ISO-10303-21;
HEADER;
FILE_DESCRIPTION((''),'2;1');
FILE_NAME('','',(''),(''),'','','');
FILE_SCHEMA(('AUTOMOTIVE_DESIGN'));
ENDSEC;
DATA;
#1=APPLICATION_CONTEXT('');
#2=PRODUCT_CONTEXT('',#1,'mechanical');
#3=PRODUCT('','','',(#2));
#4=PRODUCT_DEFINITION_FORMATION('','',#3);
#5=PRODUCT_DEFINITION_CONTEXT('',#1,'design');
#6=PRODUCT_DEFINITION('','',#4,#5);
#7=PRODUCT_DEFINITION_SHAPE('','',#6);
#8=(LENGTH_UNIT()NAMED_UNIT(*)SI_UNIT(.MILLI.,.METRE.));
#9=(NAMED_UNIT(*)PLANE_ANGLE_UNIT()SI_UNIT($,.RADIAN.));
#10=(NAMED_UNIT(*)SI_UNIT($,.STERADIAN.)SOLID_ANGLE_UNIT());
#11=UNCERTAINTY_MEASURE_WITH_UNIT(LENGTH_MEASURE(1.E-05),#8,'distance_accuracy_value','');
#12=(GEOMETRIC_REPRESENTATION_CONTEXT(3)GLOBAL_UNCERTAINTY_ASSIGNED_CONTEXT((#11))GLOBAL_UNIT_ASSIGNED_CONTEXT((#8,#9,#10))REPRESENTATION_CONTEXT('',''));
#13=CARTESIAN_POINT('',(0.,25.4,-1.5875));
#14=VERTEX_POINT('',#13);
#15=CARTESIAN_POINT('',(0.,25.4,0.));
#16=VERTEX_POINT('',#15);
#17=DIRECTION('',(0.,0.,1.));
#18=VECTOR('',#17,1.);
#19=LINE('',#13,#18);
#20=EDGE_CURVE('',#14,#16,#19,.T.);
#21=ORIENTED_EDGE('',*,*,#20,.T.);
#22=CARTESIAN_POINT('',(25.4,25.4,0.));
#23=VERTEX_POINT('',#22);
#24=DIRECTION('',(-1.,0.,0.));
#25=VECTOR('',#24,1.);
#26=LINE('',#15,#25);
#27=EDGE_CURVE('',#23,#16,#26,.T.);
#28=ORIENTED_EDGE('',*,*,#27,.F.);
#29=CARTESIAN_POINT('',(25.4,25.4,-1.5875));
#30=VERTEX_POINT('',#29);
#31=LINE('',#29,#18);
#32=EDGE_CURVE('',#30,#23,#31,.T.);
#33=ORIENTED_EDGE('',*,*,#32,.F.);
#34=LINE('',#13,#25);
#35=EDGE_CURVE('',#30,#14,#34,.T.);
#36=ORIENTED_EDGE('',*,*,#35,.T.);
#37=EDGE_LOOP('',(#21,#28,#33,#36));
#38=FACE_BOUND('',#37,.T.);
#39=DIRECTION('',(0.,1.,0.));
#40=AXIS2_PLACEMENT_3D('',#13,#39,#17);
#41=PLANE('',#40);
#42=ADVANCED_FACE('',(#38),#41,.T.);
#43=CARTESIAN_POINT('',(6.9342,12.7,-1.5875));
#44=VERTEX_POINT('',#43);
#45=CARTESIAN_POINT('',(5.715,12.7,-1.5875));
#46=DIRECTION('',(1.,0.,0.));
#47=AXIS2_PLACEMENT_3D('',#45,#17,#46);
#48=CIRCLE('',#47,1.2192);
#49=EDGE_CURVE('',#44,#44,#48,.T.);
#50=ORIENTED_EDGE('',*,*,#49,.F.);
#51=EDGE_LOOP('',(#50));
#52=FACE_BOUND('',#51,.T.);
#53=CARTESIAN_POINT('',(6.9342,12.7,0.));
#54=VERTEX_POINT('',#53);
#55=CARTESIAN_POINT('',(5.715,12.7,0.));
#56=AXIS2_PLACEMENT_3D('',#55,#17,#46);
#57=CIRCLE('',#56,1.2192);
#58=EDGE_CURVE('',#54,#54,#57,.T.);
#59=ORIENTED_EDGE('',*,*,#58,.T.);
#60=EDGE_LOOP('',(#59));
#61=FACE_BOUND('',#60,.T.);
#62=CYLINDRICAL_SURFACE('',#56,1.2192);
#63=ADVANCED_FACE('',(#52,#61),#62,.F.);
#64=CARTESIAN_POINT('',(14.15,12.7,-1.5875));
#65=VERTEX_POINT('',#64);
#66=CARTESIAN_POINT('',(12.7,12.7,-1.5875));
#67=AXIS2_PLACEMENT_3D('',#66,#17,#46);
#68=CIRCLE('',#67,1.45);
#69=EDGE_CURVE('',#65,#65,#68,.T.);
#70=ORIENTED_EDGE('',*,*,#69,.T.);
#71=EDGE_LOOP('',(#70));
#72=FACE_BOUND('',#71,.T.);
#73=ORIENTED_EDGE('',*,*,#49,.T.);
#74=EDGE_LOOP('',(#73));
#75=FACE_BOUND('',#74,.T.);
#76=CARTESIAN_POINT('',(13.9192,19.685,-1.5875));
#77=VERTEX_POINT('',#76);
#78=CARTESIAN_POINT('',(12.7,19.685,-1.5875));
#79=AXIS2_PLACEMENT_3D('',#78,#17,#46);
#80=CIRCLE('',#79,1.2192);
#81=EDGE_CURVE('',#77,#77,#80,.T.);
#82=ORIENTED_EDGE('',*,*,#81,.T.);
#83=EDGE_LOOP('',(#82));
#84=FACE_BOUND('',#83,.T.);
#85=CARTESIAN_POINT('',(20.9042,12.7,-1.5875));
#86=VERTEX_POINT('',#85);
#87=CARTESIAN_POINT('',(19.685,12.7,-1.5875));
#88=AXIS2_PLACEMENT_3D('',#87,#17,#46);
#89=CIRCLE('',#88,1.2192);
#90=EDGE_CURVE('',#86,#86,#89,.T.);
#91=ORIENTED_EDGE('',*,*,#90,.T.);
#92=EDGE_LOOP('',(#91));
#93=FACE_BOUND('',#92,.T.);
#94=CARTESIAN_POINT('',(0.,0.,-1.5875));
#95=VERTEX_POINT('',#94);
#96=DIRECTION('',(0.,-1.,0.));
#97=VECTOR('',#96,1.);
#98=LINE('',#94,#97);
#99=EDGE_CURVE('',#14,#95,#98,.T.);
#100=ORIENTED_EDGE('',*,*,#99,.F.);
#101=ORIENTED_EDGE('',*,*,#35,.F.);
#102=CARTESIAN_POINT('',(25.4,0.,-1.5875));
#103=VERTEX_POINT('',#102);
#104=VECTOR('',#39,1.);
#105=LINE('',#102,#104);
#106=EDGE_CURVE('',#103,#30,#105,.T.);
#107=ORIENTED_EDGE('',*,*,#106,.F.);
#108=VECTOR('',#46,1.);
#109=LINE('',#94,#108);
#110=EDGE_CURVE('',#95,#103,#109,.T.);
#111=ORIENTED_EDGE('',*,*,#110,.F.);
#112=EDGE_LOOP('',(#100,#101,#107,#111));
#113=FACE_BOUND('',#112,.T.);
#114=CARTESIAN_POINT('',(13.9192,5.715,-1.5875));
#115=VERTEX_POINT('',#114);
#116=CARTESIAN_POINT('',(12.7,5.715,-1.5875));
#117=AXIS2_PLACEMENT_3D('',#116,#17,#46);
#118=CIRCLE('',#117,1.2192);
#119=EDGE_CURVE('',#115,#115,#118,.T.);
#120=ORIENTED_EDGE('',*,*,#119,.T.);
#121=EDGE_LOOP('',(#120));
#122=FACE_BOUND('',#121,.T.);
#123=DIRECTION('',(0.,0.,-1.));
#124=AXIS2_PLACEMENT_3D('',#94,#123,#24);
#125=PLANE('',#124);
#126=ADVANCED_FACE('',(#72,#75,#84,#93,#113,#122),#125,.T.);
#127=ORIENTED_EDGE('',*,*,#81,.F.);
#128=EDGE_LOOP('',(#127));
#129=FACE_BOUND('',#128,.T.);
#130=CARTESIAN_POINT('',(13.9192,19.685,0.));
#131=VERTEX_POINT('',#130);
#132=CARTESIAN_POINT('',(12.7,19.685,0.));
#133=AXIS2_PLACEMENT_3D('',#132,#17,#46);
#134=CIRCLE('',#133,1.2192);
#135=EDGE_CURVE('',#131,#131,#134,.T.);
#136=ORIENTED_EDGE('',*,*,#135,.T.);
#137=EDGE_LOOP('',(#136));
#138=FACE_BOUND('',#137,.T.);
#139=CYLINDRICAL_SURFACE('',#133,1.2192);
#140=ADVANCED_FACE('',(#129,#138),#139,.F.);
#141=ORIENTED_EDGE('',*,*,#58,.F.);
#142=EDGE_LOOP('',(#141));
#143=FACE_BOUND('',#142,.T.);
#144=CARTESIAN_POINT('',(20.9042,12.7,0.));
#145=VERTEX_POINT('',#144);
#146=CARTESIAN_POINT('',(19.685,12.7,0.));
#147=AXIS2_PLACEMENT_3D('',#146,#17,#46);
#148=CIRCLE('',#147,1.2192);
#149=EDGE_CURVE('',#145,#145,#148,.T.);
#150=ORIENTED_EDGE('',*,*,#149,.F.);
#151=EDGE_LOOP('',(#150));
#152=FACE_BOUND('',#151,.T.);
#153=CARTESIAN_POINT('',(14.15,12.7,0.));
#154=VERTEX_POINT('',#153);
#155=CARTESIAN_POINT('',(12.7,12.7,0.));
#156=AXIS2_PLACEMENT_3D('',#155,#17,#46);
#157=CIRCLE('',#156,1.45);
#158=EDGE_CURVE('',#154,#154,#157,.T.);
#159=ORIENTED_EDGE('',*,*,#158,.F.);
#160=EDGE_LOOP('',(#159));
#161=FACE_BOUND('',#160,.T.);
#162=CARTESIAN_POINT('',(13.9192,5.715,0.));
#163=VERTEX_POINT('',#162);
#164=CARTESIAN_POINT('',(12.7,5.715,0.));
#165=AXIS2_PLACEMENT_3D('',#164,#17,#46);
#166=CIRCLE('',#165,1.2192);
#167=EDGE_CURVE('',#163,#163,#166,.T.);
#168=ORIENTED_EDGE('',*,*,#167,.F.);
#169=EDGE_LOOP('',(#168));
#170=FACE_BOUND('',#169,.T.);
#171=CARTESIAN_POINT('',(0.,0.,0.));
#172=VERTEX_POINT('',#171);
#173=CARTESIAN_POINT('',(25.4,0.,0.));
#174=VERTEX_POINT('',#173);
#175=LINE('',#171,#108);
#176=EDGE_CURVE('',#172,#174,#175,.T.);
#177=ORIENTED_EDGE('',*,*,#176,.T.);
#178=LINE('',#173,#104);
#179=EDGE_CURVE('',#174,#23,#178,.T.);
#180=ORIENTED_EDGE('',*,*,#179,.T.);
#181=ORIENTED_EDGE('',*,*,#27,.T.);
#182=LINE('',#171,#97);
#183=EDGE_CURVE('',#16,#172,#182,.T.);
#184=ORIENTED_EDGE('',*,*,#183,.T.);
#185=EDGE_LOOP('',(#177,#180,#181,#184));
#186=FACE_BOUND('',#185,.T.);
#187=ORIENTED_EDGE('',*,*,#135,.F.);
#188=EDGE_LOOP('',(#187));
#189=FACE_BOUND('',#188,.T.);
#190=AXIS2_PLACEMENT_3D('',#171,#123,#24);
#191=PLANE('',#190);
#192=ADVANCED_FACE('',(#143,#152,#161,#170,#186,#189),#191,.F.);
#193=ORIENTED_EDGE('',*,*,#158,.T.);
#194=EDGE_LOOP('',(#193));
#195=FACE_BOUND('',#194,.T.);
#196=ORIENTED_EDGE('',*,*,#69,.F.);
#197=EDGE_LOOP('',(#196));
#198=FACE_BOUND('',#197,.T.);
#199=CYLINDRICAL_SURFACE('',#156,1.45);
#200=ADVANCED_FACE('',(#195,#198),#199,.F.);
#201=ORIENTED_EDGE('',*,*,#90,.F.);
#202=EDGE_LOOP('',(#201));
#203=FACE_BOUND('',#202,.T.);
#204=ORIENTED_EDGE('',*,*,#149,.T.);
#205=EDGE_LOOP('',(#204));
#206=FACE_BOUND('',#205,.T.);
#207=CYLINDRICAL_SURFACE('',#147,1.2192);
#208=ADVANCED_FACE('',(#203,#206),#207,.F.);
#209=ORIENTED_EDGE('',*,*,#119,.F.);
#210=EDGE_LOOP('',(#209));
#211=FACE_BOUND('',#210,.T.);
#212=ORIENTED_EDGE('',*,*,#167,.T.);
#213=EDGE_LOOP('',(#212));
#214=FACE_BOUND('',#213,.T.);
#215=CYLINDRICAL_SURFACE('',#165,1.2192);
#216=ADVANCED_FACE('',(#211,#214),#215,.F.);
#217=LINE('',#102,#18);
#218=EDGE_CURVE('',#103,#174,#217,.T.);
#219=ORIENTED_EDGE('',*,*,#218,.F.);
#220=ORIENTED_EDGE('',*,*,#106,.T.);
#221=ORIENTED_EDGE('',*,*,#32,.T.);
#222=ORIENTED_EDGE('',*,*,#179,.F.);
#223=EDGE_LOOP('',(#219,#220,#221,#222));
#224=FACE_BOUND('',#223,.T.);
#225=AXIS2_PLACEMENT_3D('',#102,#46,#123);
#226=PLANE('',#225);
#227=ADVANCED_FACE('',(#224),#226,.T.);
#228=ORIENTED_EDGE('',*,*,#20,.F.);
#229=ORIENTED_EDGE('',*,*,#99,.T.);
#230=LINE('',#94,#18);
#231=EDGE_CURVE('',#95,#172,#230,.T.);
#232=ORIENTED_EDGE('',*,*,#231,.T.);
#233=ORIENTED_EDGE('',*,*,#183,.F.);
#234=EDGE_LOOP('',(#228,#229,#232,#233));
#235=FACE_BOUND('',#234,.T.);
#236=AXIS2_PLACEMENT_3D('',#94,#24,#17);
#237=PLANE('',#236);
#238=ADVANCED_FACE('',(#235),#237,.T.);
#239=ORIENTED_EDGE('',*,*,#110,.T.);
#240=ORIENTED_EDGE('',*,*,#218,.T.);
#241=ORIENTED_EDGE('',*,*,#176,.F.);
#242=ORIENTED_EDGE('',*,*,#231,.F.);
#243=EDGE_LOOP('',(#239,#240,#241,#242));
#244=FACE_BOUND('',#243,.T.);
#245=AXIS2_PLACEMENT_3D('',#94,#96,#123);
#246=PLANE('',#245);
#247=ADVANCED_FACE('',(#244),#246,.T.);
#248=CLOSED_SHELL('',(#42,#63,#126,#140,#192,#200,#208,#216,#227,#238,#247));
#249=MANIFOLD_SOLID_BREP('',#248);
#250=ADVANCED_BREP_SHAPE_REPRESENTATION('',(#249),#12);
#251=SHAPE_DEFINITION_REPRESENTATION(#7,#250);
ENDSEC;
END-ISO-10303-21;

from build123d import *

# Parameters (mm, degrees)
SKETCH1_W              = 25.4
SKETCH1_H              = 25.4
BASE_FLANGE1_DEPTH     = 1.5875
M2_5_CLEARANCE_HOLE1_D = 2.9
F_2_CLEARANCE_HOLE1_D  = 2.4384
CIRPATTERN1_COUNT      = 4


# Sheet-metal steps are written as plain solids
with BuildPart() as part:
    # Sketch1 → Base-Flange1 (new body)
    with BuildSketch(Plane.XY):
        with Locations((12.7, 12.7)):
            Rectangle(SKETCH1_W, SKETCH1_H)
    extrude(amount=-BASE_FLANGE1_DEPTH)

    # M2.5 Clearance Hole1 (through all)
    with Locations(Plane.XY):
        with Locations((12.7, 12.7)):
            Hole(M2_5_CLEARANCE_HOLE1_D / 2)

    # #2 Clearance Hole1 (through all)
    with Locations(Plane.XY):
        with Locations((19.685, 12.7)):
            f_2_clearance_hole1 = Hole(F_2_CLEARANCE_HOLE1_D / 2)

    # CirPattern1: #2 Clearance Hole1 ×4 about axis
    cirpattern1_axis = Axis((12.7, 12.7, 0), (0, 0, 1))
    for i in range(1, CIRPATTERN1_COUNT):
        add(f_2_clearance_hole1.rotate(cirpattern1_axis, i * 360 / CIRPATTERN1_COUNT), mode=Mode.SUBTRACT)


solid = part.part
